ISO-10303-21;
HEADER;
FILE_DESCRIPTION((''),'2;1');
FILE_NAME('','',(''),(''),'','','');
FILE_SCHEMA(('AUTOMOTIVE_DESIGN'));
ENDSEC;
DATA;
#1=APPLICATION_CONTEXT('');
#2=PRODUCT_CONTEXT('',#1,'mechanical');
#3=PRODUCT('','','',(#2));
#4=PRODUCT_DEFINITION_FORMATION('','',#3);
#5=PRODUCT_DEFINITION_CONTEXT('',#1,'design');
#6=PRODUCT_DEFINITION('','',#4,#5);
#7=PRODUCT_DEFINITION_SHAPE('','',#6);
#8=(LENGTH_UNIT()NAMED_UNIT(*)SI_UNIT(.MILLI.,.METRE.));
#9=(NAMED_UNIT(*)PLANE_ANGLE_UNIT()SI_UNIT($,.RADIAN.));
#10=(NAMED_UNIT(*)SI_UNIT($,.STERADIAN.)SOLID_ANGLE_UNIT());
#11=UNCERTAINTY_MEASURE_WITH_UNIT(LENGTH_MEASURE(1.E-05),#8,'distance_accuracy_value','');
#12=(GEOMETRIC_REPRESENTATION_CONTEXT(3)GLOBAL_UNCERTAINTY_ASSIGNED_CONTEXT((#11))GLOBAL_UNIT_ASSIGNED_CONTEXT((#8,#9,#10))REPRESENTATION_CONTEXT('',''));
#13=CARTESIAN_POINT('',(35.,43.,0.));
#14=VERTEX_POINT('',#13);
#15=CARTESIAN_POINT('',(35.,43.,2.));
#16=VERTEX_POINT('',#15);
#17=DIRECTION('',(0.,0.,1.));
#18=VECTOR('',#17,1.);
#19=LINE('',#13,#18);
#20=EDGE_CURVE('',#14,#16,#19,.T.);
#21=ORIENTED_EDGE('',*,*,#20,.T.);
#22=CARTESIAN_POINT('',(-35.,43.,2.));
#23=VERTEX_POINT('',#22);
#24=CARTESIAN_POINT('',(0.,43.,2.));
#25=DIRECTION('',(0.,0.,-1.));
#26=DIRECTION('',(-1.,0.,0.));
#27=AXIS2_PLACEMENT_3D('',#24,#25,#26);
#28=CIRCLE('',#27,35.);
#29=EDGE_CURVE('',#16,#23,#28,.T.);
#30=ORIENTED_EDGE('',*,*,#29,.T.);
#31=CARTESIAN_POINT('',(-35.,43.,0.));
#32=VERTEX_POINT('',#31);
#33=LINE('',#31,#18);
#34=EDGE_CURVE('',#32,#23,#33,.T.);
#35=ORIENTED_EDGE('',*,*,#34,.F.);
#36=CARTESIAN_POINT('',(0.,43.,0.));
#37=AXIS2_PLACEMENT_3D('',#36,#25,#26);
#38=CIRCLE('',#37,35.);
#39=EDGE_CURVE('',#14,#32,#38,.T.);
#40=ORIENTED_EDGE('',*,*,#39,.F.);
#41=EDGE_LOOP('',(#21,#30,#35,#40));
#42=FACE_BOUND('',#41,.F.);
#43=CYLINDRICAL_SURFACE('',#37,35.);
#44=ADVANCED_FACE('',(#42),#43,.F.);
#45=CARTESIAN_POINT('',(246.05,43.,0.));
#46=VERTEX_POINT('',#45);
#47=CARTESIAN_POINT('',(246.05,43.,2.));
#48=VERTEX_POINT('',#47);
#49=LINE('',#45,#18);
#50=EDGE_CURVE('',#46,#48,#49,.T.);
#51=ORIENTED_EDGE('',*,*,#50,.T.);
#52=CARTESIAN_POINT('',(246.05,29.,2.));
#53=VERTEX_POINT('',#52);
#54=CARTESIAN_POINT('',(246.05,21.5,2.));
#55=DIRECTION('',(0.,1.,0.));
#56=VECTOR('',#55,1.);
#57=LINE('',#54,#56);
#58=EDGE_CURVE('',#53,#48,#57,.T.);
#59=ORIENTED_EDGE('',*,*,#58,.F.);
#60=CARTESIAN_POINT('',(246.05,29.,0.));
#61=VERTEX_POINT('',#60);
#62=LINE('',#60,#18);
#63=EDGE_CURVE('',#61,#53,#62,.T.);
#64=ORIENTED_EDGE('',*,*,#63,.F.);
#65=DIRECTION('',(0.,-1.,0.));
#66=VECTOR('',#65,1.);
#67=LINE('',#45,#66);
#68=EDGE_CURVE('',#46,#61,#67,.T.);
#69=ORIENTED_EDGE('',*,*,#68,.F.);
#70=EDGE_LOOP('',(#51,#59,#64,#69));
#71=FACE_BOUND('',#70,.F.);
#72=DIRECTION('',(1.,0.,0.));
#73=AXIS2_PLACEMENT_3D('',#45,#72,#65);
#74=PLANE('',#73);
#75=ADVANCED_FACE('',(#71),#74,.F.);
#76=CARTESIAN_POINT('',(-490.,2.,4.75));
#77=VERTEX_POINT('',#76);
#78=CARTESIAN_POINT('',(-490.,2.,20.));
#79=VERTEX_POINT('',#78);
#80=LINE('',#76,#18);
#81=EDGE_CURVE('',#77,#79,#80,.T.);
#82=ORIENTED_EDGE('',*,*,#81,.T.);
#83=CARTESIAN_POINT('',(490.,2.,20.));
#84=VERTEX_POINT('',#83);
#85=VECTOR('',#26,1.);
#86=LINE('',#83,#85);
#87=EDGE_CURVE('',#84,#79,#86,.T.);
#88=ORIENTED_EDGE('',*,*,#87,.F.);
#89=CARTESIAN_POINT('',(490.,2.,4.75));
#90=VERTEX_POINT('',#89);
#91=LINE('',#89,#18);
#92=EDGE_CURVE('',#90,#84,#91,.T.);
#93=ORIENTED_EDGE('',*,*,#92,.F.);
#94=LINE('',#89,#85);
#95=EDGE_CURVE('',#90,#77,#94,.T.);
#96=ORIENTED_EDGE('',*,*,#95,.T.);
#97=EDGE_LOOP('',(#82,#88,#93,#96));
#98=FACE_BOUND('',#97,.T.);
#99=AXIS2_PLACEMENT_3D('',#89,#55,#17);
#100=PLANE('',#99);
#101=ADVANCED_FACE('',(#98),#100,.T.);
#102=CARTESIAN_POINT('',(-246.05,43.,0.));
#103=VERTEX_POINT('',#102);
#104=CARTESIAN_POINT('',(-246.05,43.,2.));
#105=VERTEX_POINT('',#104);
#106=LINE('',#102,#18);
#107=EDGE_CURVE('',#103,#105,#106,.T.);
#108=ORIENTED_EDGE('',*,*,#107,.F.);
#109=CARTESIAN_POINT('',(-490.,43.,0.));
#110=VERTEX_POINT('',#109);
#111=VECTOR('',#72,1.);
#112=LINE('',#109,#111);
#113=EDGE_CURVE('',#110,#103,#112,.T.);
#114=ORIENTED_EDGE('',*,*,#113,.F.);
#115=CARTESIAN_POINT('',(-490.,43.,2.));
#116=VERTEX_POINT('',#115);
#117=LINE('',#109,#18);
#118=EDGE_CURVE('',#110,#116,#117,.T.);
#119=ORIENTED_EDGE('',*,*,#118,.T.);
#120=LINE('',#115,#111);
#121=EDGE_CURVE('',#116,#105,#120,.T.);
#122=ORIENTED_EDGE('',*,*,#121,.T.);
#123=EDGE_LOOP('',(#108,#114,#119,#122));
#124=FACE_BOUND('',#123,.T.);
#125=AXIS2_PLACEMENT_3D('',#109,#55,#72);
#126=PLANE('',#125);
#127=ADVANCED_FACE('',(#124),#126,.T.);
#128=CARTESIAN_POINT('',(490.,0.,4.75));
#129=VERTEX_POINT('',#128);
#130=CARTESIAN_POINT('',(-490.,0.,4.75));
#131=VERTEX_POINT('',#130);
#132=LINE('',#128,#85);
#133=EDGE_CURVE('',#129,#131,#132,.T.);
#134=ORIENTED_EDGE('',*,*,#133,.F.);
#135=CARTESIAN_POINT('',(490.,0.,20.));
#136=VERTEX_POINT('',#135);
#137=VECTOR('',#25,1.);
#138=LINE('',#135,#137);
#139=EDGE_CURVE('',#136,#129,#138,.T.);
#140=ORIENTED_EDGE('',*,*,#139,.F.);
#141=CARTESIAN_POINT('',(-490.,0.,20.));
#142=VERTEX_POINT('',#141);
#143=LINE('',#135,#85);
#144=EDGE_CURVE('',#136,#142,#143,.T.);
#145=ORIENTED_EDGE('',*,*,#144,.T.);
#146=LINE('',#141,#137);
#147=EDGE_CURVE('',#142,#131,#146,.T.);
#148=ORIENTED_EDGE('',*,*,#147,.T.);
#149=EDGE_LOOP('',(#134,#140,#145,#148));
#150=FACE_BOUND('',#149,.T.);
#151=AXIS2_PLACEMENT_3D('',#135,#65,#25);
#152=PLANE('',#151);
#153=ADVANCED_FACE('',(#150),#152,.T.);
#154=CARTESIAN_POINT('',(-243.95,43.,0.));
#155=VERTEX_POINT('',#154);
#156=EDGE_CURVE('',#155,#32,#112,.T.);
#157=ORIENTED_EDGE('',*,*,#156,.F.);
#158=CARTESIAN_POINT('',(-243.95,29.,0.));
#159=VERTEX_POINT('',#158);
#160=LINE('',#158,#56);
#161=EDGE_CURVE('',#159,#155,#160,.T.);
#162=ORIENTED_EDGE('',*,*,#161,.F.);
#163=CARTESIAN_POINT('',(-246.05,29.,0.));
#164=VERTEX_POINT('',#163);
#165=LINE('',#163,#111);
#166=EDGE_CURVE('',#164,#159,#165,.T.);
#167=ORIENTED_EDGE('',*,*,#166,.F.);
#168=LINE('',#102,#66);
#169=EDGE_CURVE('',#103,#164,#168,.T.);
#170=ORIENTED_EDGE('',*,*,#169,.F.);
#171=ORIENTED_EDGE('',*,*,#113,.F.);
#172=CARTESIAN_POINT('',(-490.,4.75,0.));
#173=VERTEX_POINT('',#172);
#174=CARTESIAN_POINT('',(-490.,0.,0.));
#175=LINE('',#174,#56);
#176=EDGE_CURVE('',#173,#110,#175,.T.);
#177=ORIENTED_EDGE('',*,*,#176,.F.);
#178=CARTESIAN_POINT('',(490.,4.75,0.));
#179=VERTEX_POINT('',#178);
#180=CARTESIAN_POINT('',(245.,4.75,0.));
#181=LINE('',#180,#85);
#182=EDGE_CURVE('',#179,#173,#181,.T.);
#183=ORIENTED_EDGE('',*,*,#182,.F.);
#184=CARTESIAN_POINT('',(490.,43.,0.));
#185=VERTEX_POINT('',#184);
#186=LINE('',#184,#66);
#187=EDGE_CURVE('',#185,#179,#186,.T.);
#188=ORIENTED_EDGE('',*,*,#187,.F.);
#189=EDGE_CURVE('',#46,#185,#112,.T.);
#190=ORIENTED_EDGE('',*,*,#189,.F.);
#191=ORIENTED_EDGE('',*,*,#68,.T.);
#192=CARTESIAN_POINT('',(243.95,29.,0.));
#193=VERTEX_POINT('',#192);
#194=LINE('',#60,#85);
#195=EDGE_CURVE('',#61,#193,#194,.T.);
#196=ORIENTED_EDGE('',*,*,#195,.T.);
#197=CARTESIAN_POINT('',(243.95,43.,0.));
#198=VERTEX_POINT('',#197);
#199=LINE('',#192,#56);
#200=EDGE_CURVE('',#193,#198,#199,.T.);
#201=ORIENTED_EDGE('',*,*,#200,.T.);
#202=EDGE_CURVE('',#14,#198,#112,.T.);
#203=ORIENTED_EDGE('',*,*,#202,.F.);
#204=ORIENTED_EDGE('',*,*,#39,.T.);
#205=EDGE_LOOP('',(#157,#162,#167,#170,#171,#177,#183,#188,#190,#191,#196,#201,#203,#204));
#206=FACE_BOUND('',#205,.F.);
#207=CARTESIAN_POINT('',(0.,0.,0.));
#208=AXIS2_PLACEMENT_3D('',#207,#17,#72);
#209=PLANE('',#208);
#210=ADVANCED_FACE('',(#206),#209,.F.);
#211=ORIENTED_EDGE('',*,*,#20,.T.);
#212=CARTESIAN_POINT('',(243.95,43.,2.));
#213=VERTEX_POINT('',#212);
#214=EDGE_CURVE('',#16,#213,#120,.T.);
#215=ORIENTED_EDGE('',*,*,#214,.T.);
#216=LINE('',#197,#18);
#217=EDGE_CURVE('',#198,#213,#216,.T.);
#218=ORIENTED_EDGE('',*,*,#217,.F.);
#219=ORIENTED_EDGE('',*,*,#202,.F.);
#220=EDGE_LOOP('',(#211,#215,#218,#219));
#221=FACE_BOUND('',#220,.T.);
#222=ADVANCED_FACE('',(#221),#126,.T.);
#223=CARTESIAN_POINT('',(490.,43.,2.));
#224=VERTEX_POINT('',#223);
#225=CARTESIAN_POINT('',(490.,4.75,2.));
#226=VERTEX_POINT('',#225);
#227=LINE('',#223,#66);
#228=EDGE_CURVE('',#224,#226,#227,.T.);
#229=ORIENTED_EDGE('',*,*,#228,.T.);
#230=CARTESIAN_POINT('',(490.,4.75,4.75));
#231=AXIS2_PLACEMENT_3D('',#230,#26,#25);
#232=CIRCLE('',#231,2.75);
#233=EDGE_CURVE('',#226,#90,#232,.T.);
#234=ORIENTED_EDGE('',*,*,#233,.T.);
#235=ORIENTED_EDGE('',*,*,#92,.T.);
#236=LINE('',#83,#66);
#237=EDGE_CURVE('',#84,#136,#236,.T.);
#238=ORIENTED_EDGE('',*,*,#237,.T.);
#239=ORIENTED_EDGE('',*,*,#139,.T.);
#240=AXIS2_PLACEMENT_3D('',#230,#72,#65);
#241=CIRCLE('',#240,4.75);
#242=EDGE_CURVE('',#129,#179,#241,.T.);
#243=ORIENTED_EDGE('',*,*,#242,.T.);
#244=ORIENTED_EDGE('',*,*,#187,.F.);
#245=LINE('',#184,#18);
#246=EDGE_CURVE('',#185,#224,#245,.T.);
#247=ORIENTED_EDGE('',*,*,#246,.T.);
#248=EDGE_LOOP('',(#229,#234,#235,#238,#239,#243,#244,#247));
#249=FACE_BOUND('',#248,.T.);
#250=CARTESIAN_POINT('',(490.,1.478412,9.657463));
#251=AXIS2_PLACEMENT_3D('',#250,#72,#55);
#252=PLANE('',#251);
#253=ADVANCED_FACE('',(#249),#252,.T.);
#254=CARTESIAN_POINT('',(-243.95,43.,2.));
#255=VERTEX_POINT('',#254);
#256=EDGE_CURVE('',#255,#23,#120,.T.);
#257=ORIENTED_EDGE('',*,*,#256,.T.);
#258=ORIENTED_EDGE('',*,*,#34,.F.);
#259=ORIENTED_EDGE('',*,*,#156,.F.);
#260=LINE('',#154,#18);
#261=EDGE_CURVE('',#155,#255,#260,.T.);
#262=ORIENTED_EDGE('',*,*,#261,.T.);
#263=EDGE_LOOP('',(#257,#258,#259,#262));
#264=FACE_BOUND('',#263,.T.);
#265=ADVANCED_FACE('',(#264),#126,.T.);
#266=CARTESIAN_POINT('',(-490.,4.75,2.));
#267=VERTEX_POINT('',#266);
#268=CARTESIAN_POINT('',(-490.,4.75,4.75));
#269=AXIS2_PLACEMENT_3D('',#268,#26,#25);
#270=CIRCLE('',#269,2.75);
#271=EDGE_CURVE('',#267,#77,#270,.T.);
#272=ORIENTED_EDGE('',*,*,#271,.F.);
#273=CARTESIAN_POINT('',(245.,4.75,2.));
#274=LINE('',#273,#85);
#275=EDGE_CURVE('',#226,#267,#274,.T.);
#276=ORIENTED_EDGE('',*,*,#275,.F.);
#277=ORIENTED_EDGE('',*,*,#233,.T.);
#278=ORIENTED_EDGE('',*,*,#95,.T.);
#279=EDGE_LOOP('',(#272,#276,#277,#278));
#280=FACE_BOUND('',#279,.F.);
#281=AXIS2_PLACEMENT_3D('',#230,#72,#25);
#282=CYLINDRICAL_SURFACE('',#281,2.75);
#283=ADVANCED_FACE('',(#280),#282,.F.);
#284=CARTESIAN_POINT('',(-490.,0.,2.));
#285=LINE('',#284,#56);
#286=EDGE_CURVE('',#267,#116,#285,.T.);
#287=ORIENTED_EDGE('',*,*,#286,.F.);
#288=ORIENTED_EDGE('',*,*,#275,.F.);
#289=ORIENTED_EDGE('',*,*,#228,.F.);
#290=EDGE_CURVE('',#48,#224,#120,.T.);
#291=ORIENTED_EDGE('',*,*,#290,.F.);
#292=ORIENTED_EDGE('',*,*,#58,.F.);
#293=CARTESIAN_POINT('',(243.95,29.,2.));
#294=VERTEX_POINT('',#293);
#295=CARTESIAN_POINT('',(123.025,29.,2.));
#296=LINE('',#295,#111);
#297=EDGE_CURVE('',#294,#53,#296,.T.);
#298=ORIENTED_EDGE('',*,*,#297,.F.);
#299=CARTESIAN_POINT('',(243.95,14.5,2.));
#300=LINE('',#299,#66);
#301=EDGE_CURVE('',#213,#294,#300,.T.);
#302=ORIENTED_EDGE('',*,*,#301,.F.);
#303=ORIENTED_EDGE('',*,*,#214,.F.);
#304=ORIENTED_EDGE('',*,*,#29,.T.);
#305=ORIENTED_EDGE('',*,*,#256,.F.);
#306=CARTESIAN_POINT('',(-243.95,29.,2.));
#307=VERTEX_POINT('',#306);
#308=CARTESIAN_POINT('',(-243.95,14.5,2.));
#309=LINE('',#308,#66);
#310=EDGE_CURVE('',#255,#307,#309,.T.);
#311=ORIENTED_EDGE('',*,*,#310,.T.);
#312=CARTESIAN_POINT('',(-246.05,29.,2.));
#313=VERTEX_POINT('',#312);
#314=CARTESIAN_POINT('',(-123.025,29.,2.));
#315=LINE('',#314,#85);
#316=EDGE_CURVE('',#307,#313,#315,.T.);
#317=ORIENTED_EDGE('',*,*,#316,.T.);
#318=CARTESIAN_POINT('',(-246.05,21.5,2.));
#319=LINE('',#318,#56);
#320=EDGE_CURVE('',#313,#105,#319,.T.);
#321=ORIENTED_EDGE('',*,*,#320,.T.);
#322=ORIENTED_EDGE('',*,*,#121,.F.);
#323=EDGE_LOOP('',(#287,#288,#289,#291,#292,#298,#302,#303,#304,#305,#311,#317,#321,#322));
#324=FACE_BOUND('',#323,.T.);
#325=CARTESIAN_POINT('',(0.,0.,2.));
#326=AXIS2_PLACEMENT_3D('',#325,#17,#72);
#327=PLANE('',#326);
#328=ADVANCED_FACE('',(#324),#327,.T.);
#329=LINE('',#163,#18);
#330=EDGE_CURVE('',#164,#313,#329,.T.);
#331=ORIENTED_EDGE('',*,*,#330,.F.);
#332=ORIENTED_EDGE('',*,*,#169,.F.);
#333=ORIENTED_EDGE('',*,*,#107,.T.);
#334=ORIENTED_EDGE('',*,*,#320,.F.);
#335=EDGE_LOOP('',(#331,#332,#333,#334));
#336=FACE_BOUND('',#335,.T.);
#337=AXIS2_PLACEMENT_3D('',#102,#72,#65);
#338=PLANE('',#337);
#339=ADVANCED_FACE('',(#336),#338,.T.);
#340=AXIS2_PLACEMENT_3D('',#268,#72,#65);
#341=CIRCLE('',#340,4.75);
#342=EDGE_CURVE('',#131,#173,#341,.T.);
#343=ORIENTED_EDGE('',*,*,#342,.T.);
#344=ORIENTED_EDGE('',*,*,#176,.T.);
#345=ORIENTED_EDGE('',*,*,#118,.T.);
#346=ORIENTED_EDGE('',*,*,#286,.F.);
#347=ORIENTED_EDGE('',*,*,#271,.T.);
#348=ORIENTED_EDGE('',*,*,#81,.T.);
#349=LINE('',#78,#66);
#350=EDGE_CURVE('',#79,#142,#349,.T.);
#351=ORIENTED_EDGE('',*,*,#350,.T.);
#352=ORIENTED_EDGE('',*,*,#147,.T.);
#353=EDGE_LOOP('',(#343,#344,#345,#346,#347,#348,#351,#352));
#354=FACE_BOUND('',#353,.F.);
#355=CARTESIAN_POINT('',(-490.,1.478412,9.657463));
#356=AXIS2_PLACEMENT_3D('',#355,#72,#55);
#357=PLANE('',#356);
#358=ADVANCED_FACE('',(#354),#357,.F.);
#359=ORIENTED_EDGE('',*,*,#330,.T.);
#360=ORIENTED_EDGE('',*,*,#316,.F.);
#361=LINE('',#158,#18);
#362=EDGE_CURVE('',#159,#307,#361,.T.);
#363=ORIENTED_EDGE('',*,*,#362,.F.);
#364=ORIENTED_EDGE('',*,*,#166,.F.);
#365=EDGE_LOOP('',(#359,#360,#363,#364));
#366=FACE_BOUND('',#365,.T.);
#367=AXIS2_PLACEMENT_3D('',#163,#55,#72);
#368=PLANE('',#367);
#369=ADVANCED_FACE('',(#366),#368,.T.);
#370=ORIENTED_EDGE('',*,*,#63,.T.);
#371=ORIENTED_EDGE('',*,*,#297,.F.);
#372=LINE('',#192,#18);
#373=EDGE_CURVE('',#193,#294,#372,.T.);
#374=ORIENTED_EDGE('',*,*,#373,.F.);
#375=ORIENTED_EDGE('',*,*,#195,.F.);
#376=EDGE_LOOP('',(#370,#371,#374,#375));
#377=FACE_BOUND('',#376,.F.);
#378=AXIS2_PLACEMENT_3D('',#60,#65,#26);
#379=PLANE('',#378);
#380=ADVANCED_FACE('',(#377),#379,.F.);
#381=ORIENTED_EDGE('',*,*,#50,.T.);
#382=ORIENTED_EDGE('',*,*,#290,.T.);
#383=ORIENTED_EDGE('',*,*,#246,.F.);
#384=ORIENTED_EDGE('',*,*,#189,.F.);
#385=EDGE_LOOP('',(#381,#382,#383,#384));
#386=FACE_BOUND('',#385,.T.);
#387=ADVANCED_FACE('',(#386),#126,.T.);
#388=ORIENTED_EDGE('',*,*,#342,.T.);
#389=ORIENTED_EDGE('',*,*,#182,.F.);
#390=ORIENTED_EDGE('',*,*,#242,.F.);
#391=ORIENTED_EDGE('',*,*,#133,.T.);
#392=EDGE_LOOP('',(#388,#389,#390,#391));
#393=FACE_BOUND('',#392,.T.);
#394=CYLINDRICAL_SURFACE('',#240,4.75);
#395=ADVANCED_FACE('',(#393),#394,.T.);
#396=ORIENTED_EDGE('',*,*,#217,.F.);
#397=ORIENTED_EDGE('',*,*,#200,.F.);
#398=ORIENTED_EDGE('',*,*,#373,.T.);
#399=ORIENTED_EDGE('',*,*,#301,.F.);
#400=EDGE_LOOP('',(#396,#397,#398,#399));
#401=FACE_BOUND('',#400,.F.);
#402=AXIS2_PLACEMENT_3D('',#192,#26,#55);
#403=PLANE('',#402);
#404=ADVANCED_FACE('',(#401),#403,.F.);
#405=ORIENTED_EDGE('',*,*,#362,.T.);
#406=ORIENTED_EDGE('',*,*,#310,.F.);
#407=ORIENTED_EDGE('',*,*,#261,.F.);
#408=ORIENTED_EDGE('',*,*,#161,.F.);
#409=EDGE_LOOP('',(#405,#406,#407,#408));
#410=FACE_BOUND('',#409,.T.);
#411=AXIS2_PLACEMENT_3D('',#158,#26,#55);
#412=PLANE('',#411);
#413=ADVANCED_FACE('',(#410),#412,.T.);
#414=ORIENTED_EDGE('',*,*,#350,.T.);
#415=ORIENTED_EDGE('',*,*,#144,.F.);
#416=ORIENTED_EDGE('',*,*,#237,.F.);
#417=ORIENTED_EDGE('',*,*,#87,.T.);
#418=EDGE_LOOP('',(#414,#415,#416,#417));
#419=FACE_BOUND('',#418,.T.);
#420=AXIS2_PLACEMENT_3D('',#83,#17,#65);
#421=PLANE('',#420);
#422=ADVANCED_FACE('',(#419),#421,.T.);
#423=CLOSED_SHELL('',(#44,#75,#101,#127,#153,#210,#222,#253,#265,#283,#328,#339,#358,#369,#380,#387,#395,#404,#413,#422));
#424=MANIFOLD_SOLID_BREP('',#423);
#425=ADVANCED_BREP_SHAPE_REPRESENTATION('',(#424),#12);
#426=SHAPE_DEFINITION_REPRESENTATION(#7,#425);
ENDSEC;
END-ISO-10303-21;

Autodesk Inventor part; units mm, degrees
ref_plane "YZ Plane" through (0, 0, 0) normal (1, 0, 0) x (0, 1, 0)
ref_plane "XZ Plane" through (0, 0, 0) normal (0, 1, 0) x (-1, 0, 0)
ref_plane "XY Plane" through (0, 0, 0) normal (0, 0, 1) x (1, 0, 0)
sketch "Sketch1" plane through (0, 0, 0) normal (0, 0, 1) x (1, 0, 0)
  line L0 (-490, 43) -> (490, 43)
  line L1 (490, 43) -> (490, 0)
  line L2 (490, 0) -> (-490, 0)
  line L3 (-490, 0) -> (-490, 43)
  point P0 (0, 0)
  point P1 (0, 0)
  dimension "d0" = 980
  dimension "d1" = 43
extrude "Plate1" add sketch "Sketch1" along normal blind 2
sketch "Sketch2" plane through (490, 2, 0) normal (0, -1, 0) x (1, 0, 0)
  line L0 (-980, 0) -> (0, 0)
  line L1 (0, 0) -> (0, 20)
  line L2 (0, 20) -> (-980, 20)
  line L3 (-980, 20) -> (-980, 0)
edge flange "Flange1" height 20 angle 90 thickness 2 bend radius 2.75 thickness toward (0, -1, 0) relief round relief width 2 relief depth 1 edges at (0, 0, 2) wall of the first edge with corners at (-490, 2, 0) (490, 2, 0) (490, 2, 20) (-490, 2, 20)
bend "Bend1"
corner "Corner1"
sketch "Sketch5" plane through (0, 0, 0) normal (0, 0, -1) x (-1, 0, 0)
  line L0 (490, 43) -> (-490, 43) projected
  line L1 (490, 0) -> (-490, 0) projected
  circle A0 centre (0, 43) radius 35
  line L2 (243.95, 43) -> (246.05, 43)
  line L3 (246.05, 43) -> (246.05, 29)
  line L4 (246.05, 29) -> (243.95, 29)
  line L5 (243.95, 29) -> (243.95, 43)
  line L6 (-243.95, 43) -> (-246.05, 43)
  line L7 (-246.05, 43) -> (-246.05, 29)
  line L8 (-246.05, 29) -> (-243.95, 29)
  line L9 (-243.95, 29) -> (-243.95, 43)
  line L10 (0, 43) -> (0, 0) construction
  point P0 (0, 0)
  point P1 (245, 29)
  point P2 (-245, 29)
  point P3 (246.05, 43)
  point P4 (-35, 43)
  point P5 (35, 43)
  point P6 (-246.05, 43)
  dimension "d45" = 70
  dimension "d48" = 2.1
  dimension "d49" = 490
  dimension "d51" = 29
  dimension "d52" = 14
extrude "Extrusion1" cut sketch "Sketch5" against normal through all contours L3 L4 L5 L0 | L9 L8 L7 L0 | A0 L0 picked at (-5.9248, 24.8306)
sketch "Sketch9" plane through (0, 0, 2) normal (0, 0, 1) x (1, 0, 0)
  line L0 (485.6141, 29.596) -> (485.6141, 17.596) construction
  line L1 (485.6141, 17.596) -> (285.6141, 17.596) construction
  line L2 (285.6141, 17.596) -> (285.6141, 29.596) construction
  line L3 (285.6141, 29.596) -> (485.6141, 29.596) construction
  line L4 (-490, 43) -> (490, 43) projected
  point P0 (0, 0)
  point P1 (1.05, 68)
  point P2 (490, 43)
  dimension "d40" = 200
  dimension "d41" = 12
mark "Mark2"
equation "\"d2\" = Thickness"
equation "\"d3\" = BendReliefWidth"
equation "\"d4\" = BendReliefDepth"
equation "\"d5\" = MinimumRemnant"
equation "\"d6\" = TransitionRadius"
equation "\"d9\" = BendRadius"
equation "\"d10\" = CornerReliefSize"
equation "\"d11\" = GapSize"
equation "\"d12\" = JacobiRadiusSize"
equation "\"BendReliefWidth\" = Thickness"
equation "\"BendReliefDepth\" = 0.5 * Thickness"
equation "\"CornerReliefSize\" = 4 * Thickness"
equation "\"MinimumRemnant\" = 2 * Thickness"
equation "\"TransitionRadius\" = BendRadius"
equation "\"JacobiRadiusSize\" = BendRadius"
equation "\"GapSize\" = Thickness"
equation "\"Thickness\" = 2"
equation "\"BendRadius\" = 2.75"
properties part number "MSC 308 stringer BOARD  ###" material "Stainless Steel"
